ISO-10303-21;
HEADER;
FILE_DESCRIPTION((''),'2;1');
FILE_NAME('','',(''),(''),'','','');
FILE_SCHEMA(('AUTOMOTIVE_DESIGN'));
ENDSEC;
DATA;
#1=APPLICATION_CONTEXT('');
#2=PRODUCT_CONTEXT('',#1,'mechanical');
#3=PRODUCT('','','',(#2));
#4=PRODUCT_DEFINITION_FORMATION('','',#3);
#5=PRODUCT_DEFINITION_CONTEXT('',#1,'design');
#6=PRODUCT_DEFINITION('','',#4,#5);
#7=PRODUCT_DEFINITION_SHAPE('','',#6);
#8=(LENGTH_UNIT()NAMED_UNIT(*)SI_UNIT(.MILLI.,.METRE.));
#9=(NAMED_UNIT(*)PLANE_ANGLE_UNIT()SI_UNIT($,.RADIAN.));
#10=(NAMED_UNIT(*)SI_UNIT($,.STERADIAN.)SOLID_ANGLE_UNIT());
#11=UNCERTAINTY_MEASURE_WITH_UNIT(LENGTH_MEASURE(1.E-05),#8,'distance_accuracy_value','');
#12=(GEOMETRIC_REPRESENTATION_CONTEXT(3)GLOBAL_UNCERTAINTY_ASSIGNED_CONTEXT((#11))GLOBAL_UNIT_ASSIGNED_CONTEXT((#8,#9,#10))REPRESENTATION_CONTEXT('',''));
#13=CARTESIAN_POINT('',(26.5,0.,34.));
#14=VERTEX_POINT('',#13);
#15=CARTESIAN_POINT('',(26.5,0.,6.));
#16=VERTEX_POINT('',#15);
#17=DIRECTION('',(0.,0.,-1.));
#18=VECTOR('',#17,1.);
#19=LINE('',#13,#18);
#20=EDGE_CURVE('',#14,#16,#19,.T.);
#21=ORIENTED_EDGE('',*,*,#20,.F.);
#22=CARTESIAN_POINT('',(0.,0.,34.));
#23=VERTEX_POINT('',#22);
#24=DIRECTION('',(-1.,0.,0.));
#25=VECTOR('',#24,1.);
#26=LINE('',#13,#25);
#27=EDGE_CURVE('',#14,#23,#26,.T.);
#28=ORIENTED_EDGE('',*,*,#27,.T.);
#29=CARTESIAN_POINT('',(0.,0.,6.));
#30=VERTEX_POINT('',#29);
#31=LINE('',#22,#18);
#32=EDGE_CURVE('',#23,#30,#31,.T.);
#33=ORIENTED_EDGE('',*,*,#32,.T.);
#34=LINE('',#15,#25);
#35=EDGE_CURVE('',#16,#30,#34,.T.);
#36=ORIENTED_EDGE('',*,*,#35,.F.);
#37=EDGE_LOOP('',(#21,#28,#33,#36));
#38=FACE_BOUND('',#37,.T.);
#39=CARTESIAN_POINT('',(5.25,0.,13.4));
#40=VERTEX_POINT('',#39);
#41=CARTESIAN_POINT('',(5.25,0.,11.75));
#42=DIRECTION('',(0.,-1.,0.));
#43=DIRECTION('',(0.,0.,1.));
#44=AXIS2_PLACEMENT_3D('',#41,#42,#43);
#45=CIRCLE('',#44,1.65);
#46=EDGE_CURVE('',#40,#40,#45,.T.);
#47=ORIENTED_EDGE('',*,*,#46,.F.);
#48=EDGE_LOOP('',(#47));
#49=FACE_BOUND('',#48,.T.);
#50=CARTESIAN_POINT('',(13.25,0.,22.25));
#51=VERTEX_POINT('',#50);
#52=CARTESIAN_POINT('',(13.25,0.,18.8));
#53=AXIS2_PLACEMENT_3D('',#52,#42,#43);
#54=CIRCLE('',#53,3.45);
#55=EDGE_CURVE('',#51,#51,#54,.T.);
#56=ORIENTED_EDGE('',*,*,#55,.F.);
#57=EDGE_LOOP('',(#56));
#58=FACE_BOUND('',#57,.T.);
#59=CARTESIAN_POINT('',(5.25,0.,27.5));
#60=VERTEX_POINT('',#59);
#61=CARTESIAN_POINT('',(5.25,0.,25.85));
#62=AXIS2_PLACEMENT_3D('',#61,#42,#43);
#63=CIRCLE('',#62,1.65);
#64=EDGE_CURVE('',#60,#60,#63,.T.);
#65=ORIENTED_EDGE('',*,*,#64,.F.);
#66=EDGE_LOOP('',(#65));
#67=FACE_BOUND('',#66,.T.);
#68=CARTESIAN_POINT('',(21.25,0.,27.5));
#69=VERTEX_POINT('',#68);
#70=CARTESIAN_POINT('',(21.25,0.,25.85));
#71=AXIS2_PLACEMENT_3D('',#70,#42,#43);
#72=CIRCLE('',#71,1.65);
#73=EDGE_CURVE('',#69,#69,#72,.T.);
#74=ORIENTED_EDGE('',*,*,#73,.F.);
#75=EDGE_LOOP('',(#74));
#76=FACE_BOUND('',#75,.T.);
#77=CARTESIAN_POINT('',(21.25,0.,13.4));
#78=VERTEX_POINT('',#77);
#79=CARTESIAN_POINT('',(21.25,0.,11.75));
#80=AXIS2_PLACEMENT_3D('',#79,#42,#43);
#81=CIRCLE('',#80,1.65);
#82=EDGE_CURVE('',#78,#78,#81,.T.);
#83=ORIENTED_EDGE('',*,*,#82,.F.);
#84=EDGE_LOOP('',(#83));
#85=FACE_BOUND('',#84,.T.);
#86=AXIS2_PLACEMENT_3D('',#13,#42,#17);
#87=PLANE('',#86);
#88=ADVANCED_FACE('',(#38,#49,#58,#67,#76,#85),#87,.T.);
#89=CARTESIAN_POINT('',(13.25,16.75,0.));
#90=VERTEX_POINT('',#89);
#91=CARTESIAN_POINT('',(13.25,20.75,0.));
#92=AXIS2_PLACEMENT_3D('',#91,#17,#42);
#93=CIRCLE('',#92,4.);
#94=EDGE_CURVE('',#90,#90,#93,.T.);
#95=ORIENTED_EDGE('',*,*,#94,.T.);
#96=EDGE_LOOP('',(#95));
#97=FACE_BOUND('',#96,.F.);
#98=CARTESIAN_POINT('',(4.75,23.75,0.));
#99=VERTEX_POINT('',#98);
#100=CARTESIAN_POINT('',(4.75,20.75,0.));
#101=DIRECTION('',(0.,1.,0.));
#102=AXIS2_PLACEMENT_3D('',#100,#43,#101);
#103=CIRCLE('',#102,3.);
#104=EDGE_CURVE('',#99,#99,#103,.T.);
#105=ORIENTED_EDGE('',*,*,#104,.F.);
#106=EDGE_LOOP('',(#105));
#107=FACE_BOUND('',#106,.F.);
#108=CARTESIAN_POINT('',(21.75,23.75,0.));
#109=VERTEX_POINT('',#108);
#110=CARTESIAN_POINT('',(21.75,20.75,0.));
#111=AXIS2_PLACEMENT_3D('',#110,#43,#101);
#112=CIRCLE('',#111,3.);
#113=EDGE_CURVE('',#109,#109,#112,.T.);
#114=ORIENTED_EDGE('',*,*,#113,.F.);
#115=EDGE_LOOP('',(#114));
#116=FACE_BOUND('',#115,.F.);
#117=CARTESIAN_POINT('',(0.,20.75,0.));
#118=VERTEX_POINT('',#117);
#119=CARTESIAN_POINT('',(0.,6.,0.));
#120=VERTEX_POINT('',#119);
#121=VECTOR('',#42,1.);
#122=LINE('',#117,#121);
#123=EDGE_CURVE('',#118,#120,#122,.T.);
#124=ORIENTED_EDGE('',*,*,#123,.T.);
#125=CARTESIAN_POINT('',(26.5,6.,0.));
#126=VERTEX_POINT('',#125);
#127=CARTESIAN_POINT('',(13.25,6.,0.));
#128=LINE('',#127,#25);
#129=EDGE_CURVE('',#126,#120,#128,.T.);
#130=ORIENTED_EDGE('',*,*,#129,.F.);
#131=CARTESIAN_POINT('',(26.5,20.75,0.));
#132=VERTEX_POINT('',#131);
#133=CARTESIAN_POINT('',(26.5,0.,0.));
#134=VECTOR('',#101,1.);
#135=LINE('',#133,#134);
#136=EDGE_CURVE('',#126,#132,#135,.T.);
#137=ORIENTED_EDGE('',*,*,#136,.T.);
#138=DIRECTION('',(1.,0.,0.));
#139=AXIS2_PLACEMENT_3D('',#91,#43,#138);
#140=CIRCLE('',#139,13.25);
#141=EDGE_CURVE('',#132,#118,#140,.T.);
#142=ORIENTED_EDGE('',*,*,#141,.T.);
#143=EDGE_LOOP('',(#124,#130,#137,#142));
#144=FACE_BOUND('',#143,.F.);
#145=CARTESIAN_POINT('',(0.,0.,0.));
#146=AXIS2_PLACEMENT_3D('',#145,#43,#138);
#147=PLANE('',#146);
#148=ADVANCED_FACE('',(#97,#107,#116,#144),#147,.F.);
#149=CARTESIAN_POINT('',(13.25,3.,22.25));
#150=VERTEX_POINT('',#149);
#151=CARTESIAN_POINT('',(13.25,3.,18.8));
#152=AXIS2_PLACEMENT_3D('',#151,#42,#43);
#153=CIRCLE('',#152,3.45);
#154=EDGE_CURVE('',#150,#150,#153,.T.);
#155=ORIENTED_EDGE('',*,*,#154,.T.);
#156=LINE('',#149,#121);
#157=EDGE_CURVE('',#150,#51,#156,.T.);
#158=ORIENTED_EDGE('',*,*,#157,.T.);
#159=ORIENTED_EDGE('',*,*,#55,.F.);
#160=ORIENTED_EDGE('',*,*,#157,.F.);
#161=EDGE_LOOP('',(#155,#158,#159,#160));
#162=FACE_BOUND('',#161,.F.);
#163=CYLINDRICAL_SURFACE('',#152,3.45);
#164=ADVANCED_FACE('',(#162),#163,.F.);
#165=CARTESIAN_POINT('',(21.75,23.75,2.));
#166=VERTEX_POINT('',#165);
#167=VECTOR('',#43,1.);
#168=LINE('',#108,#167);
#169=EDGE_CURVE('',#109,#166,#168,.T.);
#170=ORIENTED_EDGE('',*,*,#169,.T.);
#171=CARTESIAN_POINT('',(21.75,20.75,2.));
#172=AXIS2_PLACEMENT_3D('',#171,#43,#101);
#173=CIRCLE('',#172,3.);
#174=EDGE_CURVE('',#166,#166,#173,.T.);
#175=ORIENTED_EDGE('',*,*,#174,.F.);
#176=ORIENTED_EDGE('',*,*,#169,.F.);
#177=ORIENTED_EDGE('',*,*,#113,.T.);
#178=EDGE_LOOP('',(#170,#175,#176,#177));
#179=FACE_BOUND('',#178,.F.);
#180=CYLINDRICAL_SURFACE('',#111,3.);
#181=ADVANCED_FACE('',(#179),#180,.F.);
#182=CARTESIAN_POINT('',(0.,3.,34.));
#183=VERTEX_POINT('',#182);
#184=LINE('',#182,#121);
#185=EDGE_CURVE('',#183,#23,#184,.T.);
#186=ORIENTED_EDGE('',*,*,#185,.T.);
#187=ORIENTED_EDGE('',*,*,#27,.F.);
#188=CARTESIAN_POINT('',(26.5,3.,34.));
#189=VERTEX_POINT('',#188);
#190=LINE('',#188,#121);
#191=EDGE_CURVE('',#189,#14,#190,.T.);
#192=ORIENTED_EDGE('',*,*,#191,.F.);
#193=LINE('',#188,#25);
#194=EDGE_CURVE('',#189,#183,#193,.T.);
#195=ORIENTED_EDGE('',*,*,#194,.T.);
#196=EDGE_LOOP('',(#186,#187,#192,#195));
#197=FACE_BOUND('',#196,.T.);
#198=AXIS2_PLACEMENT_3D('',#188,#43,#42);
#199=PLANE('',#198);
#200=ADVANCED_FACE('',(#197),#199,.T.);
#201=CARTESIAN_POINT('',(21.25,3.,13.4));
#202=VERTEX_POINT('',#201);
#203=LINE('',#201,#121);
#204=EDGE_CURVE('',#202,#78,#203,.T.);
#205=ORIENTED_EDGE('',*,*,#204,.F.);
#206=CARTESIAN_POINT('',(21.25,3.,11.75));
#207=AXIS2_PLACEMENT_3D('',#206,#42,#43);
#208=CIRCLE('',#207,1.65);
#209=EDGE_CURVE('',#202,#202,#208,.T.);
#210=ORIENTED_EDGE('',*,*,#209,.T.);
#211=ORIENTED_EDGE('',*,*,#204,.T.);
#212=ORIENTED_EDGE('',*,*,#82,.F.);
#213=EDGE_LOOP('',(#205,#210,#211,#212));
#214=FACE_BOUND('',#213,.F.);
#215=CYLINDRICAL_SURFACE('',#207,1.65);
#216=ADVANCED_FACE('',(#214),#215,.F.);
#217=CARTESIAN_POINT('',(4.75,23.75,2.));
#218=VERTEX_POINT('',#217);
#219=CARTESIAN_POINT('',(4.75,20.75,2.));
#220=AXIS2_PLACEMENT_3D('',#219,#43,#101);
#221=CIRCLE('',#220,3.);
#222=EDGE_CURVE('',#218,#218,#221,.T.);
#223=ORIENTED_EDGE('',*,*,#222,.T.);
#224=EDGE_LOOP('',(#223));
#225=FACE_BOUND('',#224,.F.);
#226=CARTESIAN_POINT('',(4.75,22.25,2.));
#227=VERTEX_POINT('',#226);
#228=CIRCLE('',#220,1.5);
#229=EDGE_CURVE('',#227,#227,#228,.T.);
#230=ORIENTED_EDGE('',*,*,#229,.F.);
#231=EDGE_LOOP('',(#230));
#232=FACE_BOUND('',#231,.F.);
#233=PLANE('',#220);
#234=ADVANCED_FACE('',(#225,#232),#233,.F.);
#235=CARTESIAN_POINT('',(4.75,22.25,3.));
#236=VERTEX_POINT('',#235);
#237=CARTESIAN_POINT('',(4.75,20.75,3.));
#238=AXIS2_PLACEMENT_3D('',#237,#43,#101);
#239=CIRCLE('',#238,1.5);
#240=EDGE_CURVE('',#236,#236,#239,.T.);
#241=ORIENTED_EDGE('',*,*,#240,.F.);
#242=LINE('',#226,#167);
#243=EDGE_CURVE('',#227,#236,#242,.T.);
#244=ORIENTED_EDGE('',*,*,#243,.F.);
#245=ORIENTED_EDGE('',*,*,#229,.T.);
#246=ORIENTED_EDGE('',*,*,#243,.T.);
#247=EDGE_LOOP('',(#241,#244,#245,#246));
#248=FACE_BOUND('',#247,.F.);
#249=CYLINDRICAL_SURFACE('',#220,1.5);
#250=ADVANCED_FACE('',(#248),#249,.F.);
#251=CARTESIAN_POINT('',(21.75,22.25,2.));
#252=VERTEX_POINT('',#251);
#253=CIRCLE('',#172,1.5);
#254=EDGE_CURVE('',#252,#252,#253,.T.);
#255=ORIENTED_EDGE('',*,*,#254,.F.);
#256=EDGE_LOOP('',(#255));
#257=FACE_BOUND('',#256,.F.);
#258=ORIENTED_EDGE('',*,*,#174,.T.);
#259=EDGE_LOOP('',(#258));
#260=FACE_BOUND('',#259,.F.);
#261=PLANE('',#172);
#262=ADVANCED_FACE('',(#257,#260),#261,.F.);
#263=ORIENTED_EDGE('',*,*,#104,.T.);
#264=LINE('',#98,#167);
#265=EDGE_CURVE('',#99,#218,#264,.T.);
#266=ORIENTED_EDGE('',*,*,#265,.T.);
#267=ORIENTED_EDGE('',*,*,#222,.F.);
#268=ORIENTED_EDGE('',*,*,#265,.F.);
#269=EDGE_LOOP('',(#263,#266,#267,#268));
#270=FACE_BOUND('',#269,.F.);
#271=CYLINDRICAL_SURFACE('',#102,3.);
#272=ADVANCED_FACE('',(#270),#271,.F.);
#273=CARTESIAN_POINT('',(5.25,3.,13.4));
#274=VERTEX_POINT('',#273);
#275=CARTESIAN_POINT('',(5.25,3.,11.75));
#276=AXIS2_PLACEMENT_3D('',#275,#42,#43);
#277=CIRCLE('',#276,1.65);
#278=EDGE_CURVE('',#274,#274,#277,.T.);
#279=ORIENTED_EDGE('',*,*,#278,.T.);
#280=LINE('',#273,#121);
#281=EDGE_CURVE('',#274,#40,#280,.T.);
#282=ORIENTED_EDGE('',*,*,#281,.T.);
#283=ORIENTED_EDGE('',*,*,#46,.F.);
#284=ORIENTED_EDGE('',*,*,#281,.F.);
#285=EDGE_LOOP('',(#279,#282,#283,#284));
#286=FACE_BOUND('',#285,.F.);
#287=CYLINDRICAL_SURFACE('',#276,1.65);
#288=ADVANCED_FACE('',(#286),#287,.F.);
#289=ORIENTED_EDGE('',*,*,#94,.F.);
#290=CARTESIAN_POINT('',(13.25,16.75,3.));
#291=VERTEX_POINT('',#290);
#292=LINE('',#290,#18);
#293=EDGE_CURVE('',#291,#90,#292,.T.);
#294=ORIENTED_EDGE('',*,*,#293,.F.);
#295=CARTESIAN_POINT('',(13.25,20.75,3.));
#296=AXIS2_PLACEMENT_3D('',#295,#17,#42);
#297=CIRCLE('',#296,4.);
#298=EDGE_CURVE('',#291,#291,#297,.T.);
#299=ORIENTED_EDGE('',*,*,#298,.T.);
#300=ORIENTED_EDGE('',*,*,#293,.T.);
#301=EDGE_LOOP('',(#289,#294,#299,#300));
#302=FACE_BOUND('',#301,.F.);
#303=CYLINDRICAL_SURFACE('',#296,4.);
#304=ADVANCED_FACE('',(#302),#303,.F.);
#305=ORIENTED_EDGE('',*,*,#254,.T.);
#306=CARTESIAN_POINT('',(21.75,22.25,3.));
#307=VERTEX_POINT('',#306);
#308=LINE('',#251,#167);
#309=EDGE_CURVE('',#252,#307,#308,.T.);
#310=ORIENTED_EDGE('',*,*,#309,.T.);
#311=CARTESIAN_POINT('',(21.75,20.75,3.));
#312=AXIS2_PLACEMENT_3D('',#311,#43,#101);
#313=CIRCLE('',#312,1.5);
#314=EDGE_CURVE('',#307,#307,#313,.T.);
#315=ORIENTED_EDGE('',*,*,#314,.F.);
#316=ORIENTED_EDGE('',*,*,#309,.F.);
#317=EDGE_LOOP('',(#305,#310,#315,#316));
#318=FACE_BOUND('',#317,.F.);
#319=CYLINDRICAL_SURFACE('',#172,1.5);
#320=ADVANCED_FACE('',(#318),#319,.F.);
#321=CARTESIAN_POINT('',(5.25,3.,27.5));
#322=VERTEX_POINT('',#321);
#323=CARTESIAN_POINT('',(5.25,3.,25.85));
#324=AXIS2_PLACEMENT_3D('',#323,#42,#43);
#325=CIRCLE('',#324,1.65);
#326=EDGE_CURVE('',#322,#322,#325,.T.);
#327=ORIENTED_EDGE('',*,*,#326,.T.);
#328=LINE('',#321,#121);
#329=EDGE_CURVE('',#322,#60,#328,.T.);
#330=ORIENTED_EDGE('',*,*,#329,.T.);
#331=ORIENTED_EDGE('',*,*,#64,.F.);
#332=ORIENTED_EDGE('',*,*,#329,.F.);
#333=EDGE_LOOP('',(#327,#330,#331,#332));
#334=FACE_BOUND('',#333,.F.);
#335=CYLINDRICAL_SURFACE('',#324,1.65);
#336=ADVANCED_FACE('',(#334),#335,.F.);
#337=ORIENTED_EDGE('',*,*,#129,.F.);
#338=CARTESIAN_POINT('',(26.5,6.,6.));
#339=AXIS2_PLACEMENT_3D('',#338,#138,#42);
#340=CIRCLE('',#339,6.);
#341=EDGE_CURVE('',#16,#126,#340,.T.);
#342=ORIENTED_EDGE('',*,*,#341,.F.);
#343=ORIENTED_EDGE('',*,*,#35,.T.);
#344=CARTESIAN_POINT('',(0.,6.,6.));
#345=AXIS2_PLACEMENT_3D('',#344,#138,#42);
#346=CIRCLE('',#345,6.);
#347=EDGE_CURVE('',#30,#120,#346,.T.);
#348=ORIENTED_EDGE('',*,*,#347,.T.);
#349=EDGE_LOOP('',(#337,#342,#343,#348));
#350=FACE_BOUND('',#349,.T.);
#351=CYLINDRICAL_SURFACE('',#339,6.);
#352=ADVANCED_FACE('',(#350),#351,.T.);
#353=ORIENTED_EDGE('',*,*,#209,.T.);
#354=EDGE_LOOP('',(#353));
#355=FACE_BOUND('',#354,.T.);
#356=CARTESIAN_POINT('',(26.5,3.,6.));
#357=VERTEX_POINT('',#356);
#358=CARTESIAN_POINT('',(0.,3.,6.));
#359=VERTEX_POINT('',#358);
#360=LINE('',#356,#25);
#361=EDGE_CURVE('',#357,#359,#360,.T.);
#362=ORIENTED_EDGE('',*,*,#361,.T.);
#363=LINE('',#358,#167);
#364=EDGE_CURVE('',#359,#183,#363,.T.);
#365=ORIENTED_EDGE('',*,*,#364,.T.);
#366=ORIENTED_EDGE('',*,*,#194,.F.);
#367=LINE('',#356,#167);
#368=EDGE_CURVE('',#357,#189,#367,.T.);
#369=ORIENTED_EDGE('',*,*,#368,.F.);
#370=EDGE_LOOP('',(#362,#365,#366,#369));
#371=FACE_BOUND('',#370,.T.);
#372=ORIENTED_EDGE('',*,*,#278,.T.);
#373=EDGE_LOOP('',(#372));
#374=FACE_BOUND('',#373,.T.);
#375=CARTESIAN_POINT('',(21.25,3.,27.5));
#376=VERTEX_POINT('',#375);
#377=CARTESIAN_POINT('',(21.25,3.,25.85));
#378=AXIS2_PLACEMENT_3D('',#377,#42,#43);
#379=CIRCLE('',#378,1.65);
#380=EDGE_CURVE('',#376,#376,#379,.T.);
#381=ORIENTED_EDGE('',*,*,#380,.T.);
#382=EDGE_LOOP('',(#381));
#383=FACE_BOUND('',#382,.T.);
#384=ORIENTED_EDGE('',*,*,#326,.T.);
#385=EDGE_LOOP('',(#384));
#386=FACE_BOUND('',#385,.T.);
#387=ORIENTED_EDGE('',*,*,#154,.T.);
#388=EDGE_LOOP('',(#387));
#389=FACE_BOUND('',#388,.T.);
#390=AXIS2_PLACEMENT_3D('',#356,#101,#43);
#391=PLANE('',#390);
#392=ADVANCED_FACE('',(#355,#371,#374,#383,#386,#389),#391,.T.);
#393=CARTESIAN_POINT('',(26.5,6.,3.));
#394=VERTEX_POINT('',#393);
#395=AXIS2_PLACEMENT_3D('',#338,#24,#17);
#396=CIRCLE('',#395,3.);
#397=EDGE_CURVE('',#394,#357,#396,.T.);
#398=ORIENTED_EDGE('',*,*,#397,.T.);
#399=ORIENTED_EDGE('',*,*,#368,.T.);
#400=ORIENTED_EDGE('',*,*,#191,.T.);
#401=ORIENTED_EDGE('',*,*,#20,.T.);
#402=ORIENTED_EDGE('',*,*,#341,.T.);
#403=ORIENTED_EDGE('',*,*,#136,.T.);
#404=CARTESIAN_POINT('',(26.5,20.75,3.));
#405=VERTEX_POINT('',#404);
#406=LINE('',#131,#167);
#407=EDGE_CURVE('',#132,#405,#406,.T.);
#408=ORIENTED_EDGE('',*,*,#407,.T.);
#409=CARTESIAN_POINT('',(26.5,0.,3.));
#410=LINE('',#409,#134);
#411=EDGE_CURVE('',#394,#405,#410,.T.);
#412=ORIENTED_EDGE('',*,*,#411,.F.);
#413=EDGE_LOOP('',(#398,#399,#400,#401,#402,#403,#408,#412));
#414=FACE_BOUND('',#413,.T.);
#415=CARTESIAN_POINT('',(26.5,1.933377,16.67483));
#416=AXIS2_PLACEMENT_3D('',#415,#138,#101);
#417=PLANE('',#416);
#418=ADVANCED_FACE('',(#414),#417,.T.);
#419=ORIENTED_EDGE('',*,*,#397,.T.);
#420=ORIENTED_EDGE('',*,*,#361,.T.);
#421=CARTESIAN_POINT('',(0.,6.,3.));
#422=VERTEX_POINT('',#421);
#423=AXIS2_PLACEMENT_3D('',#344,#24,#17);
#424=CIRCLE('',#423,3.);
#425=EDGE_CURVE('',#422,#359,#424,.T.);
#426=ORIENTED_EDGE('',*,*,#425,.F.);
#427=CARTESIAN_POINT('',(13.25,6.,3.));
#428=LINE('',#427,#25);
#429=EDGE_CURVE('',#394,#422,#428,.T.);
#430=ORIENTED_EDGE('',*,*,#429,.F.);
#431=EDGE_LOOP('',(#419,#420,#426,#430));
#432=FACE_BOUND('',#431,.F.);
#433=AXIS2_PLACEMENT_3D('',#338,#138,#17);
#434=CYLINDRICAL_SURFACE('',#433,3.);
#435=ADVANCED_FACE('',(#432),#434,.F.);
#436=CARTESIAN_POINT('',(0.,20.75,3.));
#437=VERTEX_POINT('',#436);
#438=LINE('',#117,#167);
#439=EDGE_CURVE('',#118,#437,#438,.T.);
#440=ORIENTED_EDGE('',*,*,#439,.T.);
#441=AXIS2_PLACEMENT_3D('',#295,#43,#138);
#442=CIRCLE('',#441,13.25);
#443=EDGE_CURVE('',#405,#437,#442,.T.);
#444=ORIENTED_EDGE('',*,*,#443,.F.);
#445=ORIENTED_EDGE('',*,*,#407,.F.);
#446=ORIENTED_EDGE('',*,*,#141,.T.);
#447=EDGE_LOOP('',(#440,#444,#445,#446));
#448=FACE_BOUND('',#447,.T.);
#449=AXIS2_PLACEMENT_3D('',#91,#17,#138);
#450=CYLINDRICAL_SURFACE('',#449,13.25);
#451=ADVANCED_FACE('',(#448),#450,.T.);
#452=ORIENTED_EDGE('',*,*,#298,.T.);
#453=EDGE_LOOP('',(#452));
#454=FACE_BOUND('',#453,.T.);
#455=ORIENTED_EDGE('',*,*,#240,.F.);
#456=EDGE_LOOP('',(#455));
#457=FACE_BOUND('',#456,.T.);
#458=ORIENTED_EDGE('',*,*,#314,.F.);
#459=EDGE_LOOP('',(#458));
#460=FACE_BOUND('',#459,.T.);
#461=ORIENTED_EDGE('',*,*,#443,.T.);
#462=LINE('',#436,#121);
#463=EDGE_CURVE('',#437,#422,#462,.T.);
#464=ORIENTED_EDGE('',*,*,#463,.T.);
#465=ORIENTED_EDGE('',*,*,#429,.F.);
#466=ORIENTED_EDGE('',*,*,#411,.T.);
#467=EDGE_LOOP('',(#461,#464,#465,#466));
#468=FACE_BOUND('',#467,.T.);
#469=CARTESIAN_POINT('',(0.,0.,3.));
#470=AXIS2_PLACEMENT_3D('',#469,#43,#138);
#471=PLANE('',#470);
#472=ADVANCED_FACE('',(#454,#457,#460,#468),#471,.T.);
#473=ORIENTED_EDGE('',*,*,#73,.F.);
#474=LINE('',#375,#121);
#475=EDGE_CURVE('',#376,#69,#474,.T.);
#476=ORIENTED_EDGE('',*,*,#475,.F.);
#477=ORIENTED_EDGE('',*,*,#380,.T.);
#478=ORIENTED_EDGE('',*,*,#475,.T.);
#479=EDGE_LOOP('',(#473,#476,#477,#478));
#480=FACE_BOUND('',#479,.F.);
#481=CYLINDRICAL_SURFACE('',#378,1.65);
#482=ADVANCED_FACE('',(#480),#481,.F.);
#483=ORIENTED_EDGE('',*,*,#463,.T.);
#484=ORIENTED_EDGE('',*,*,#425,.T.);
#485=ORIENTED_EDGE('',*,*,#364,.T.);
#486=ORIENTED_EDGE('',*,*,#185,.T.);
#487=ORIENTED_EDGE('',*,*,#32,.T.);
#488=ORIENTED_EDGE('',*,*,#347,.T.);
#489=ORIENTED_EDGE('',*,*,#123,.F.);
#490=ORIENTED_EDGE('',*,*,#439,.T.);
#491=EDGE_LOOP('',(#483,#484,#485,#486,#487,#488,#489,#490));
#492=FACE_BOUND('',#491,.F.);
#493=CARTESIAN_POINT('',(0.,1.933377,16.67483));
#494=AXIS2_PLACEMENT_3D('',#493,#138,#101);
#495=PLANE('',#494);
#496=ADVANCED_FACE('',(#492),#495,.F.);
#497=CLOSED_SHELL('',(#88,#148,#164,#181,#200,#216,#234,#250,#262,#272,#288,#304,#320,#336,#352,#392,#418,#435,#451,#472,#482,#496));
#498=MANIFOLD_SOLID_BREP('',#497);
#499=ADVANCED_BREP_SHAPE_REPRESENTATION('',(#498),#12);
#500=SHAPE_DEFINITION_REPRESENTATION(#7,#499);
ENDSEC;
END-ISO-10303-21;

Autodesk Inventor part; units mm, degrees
ref_plane "YZ Plane" through (0, 0, 0) normal (1, 0, 0) x (0, 1, 0)
ref_plane "XZ Plane" through (0, 0, 0) normal (0, 1, 0) x (-1, 0, 0)
ref_plane "XY Plane" through (0, 0, 0) normal (0, 0, 1) x (1, 0, 0)
sketch "Sketch4" plane through (0, 0, 0) normal (0, 0, 1) x (1, 0, 0)
  line L0 (0, 0) -> (26.5, 0)
  line L1 (26.5, 0) -> (26.5, 20.75)
  line L2 (0, 20.75) -> (0, 0)
  arc A0 (26.5, 20.75) -> (0, 20.75) centre (13.25, 20.75) ccw
  line L3 (-1.1061, 34) -> (25.3939, 34) construction
  dimension "d70" = 26.5
  dimension "d71" = 34
extrude "Plate3" add sketch "Sketch4" along normal blind 3
sketch "Sketch5" plane through (26.5, 3, 0) normal (0, -1, 0) x (1, 0, 0)
  line L0 (-26.5, 0) -> (0, 0)
  line L1 (0, 0) -> (0, 34)
  line L2 (0, 34) -> (-26.5, 34)
  line L3 (-26.5, 34) -> (-26.5, 0)
edge flange "Flange2" height 34 angle 90 thickness 3 bend radius 3 thickness toward (0, -1, 0) relief tear relief width 3 relief depth 1.5 edges at (13.25, 0, 3) wall of the first edge with corners at (0, 3, 0) (26.5, 3, 0) (26.5, 3, 34) (0, 3, 34)
bend "Bend2"
corner "Corner2"
sketch "Sketch8" plane through (0, 3, 3) normal (0, 0, 1) x (1, 0, 0)
  line L0 (26.5, 3) -> (0, 3) projected
  line L1 (13.25, 3) -> (13.25, 35.5458) construction
  line L2 (0, -3) -> (26.5, -3) projected
  point P0 (13.25, 17.75)
  point P1 (13.25, -3)
  dimension "d72" = 20.75
hole "Hole3" at (13.25, 20.75, 3) direction (0, 0, -1) diameter 8 end through all
sketch "Sketch11" plane through (0, 3, 34) normal (0, 1, 0) x (1, 0, 0)
  line L0 (0, 0) -> (26.5, 0) projected
  line L1 (13.25, 0) -> (13.25, 41.3955) construction
  point P0 (0, 34)
  point P1 (13.25, 15.2)
  dimension "d81" = 15.2
hole "Hole5" at (13.25, 3, 18.8) direction (0, -1, 0) diameter 6.9 end through all
sketch "Sketch12" plane through (0, 3, 34) normal (0, 1, 0) x (1, 0, 0)
  circle A0 centre (13.25, 15.2) radius 3.45 projected
  circle A1 centre (13.25, 15.2) radius 10.6631 construction
  line L0 (0, 0) -> (26.5, 0) projected
  point P0 (0, 34)
  point P1 (21.25, 8.15)
  point P2 (5.25, 8.15)
  point P3 (5.25, 22.25)
  point P4 (21.25, 22.25)
  dimension "d89" = 16
  dimension "d90" = 8.15
hole "Hole6" at (21.25, 3, 25.85) at (5.25, 3, 25.85) at (5.25, 3, 11.75) at (21.25, 3, 11.75) direction (0, -1, 0) diameter 3.3 end through all
sketch "Sketch13" plane through (0, 0, 0) normal (0, 0, -1) x (-1, 0, 0)
  circle A0 centre (-13.25, 20.75) radius 4 projected
  circle A1 centre (-13.25, 20.75) radius 8.5 construction
  point P0 (0, 0)
  point P1 (-21.75, 20.75)
  point P2 (-4.75, 20.75)
  dimension "d98" = 17
hole "Hole7" at (21.75, 20.75, 0) at (4.75, 20.75, 0) direction (0, 0, 1) diameter 3 end through all counterbore diameter 6 counterbore depth 2
equation "\"d27\" = Thickness"
equation "\"d28\" = BendReliefWidth"
equation "\"d29\" = BendReliefDepth"
equation "\"d30\" = MinimumRemnant"
equation "\"d31\" = TransitionRadius"
equation "\"d34\" = BendRadius"
equation "\"d35\" = CornerReliefSize"
equation "\"d36\" = GapSize"
equation "\"d37\" = JacobiRadiusSize"
equation "\"BendRadius\" = Thickness"
equation "\"BendReliefWidth\" = Thickness"
equation "\"BendReliefDepth\" = 0.5 * Thickness"
equation "\"CornerReliefSize\" = 4 * Thickness"
equation "\"MinimumRemnant\" = 2 * Thickness"
equation "\"TransitionRadius\" = BendRadius"
equation "\"JacobiRadiusSize\" = BendRadius"
equation "\"GapSize\" = Thickness"
equation "\"Thickness\" = 3"
properties part number "JGA25-370-bracket" material "Aluminum 6061"
